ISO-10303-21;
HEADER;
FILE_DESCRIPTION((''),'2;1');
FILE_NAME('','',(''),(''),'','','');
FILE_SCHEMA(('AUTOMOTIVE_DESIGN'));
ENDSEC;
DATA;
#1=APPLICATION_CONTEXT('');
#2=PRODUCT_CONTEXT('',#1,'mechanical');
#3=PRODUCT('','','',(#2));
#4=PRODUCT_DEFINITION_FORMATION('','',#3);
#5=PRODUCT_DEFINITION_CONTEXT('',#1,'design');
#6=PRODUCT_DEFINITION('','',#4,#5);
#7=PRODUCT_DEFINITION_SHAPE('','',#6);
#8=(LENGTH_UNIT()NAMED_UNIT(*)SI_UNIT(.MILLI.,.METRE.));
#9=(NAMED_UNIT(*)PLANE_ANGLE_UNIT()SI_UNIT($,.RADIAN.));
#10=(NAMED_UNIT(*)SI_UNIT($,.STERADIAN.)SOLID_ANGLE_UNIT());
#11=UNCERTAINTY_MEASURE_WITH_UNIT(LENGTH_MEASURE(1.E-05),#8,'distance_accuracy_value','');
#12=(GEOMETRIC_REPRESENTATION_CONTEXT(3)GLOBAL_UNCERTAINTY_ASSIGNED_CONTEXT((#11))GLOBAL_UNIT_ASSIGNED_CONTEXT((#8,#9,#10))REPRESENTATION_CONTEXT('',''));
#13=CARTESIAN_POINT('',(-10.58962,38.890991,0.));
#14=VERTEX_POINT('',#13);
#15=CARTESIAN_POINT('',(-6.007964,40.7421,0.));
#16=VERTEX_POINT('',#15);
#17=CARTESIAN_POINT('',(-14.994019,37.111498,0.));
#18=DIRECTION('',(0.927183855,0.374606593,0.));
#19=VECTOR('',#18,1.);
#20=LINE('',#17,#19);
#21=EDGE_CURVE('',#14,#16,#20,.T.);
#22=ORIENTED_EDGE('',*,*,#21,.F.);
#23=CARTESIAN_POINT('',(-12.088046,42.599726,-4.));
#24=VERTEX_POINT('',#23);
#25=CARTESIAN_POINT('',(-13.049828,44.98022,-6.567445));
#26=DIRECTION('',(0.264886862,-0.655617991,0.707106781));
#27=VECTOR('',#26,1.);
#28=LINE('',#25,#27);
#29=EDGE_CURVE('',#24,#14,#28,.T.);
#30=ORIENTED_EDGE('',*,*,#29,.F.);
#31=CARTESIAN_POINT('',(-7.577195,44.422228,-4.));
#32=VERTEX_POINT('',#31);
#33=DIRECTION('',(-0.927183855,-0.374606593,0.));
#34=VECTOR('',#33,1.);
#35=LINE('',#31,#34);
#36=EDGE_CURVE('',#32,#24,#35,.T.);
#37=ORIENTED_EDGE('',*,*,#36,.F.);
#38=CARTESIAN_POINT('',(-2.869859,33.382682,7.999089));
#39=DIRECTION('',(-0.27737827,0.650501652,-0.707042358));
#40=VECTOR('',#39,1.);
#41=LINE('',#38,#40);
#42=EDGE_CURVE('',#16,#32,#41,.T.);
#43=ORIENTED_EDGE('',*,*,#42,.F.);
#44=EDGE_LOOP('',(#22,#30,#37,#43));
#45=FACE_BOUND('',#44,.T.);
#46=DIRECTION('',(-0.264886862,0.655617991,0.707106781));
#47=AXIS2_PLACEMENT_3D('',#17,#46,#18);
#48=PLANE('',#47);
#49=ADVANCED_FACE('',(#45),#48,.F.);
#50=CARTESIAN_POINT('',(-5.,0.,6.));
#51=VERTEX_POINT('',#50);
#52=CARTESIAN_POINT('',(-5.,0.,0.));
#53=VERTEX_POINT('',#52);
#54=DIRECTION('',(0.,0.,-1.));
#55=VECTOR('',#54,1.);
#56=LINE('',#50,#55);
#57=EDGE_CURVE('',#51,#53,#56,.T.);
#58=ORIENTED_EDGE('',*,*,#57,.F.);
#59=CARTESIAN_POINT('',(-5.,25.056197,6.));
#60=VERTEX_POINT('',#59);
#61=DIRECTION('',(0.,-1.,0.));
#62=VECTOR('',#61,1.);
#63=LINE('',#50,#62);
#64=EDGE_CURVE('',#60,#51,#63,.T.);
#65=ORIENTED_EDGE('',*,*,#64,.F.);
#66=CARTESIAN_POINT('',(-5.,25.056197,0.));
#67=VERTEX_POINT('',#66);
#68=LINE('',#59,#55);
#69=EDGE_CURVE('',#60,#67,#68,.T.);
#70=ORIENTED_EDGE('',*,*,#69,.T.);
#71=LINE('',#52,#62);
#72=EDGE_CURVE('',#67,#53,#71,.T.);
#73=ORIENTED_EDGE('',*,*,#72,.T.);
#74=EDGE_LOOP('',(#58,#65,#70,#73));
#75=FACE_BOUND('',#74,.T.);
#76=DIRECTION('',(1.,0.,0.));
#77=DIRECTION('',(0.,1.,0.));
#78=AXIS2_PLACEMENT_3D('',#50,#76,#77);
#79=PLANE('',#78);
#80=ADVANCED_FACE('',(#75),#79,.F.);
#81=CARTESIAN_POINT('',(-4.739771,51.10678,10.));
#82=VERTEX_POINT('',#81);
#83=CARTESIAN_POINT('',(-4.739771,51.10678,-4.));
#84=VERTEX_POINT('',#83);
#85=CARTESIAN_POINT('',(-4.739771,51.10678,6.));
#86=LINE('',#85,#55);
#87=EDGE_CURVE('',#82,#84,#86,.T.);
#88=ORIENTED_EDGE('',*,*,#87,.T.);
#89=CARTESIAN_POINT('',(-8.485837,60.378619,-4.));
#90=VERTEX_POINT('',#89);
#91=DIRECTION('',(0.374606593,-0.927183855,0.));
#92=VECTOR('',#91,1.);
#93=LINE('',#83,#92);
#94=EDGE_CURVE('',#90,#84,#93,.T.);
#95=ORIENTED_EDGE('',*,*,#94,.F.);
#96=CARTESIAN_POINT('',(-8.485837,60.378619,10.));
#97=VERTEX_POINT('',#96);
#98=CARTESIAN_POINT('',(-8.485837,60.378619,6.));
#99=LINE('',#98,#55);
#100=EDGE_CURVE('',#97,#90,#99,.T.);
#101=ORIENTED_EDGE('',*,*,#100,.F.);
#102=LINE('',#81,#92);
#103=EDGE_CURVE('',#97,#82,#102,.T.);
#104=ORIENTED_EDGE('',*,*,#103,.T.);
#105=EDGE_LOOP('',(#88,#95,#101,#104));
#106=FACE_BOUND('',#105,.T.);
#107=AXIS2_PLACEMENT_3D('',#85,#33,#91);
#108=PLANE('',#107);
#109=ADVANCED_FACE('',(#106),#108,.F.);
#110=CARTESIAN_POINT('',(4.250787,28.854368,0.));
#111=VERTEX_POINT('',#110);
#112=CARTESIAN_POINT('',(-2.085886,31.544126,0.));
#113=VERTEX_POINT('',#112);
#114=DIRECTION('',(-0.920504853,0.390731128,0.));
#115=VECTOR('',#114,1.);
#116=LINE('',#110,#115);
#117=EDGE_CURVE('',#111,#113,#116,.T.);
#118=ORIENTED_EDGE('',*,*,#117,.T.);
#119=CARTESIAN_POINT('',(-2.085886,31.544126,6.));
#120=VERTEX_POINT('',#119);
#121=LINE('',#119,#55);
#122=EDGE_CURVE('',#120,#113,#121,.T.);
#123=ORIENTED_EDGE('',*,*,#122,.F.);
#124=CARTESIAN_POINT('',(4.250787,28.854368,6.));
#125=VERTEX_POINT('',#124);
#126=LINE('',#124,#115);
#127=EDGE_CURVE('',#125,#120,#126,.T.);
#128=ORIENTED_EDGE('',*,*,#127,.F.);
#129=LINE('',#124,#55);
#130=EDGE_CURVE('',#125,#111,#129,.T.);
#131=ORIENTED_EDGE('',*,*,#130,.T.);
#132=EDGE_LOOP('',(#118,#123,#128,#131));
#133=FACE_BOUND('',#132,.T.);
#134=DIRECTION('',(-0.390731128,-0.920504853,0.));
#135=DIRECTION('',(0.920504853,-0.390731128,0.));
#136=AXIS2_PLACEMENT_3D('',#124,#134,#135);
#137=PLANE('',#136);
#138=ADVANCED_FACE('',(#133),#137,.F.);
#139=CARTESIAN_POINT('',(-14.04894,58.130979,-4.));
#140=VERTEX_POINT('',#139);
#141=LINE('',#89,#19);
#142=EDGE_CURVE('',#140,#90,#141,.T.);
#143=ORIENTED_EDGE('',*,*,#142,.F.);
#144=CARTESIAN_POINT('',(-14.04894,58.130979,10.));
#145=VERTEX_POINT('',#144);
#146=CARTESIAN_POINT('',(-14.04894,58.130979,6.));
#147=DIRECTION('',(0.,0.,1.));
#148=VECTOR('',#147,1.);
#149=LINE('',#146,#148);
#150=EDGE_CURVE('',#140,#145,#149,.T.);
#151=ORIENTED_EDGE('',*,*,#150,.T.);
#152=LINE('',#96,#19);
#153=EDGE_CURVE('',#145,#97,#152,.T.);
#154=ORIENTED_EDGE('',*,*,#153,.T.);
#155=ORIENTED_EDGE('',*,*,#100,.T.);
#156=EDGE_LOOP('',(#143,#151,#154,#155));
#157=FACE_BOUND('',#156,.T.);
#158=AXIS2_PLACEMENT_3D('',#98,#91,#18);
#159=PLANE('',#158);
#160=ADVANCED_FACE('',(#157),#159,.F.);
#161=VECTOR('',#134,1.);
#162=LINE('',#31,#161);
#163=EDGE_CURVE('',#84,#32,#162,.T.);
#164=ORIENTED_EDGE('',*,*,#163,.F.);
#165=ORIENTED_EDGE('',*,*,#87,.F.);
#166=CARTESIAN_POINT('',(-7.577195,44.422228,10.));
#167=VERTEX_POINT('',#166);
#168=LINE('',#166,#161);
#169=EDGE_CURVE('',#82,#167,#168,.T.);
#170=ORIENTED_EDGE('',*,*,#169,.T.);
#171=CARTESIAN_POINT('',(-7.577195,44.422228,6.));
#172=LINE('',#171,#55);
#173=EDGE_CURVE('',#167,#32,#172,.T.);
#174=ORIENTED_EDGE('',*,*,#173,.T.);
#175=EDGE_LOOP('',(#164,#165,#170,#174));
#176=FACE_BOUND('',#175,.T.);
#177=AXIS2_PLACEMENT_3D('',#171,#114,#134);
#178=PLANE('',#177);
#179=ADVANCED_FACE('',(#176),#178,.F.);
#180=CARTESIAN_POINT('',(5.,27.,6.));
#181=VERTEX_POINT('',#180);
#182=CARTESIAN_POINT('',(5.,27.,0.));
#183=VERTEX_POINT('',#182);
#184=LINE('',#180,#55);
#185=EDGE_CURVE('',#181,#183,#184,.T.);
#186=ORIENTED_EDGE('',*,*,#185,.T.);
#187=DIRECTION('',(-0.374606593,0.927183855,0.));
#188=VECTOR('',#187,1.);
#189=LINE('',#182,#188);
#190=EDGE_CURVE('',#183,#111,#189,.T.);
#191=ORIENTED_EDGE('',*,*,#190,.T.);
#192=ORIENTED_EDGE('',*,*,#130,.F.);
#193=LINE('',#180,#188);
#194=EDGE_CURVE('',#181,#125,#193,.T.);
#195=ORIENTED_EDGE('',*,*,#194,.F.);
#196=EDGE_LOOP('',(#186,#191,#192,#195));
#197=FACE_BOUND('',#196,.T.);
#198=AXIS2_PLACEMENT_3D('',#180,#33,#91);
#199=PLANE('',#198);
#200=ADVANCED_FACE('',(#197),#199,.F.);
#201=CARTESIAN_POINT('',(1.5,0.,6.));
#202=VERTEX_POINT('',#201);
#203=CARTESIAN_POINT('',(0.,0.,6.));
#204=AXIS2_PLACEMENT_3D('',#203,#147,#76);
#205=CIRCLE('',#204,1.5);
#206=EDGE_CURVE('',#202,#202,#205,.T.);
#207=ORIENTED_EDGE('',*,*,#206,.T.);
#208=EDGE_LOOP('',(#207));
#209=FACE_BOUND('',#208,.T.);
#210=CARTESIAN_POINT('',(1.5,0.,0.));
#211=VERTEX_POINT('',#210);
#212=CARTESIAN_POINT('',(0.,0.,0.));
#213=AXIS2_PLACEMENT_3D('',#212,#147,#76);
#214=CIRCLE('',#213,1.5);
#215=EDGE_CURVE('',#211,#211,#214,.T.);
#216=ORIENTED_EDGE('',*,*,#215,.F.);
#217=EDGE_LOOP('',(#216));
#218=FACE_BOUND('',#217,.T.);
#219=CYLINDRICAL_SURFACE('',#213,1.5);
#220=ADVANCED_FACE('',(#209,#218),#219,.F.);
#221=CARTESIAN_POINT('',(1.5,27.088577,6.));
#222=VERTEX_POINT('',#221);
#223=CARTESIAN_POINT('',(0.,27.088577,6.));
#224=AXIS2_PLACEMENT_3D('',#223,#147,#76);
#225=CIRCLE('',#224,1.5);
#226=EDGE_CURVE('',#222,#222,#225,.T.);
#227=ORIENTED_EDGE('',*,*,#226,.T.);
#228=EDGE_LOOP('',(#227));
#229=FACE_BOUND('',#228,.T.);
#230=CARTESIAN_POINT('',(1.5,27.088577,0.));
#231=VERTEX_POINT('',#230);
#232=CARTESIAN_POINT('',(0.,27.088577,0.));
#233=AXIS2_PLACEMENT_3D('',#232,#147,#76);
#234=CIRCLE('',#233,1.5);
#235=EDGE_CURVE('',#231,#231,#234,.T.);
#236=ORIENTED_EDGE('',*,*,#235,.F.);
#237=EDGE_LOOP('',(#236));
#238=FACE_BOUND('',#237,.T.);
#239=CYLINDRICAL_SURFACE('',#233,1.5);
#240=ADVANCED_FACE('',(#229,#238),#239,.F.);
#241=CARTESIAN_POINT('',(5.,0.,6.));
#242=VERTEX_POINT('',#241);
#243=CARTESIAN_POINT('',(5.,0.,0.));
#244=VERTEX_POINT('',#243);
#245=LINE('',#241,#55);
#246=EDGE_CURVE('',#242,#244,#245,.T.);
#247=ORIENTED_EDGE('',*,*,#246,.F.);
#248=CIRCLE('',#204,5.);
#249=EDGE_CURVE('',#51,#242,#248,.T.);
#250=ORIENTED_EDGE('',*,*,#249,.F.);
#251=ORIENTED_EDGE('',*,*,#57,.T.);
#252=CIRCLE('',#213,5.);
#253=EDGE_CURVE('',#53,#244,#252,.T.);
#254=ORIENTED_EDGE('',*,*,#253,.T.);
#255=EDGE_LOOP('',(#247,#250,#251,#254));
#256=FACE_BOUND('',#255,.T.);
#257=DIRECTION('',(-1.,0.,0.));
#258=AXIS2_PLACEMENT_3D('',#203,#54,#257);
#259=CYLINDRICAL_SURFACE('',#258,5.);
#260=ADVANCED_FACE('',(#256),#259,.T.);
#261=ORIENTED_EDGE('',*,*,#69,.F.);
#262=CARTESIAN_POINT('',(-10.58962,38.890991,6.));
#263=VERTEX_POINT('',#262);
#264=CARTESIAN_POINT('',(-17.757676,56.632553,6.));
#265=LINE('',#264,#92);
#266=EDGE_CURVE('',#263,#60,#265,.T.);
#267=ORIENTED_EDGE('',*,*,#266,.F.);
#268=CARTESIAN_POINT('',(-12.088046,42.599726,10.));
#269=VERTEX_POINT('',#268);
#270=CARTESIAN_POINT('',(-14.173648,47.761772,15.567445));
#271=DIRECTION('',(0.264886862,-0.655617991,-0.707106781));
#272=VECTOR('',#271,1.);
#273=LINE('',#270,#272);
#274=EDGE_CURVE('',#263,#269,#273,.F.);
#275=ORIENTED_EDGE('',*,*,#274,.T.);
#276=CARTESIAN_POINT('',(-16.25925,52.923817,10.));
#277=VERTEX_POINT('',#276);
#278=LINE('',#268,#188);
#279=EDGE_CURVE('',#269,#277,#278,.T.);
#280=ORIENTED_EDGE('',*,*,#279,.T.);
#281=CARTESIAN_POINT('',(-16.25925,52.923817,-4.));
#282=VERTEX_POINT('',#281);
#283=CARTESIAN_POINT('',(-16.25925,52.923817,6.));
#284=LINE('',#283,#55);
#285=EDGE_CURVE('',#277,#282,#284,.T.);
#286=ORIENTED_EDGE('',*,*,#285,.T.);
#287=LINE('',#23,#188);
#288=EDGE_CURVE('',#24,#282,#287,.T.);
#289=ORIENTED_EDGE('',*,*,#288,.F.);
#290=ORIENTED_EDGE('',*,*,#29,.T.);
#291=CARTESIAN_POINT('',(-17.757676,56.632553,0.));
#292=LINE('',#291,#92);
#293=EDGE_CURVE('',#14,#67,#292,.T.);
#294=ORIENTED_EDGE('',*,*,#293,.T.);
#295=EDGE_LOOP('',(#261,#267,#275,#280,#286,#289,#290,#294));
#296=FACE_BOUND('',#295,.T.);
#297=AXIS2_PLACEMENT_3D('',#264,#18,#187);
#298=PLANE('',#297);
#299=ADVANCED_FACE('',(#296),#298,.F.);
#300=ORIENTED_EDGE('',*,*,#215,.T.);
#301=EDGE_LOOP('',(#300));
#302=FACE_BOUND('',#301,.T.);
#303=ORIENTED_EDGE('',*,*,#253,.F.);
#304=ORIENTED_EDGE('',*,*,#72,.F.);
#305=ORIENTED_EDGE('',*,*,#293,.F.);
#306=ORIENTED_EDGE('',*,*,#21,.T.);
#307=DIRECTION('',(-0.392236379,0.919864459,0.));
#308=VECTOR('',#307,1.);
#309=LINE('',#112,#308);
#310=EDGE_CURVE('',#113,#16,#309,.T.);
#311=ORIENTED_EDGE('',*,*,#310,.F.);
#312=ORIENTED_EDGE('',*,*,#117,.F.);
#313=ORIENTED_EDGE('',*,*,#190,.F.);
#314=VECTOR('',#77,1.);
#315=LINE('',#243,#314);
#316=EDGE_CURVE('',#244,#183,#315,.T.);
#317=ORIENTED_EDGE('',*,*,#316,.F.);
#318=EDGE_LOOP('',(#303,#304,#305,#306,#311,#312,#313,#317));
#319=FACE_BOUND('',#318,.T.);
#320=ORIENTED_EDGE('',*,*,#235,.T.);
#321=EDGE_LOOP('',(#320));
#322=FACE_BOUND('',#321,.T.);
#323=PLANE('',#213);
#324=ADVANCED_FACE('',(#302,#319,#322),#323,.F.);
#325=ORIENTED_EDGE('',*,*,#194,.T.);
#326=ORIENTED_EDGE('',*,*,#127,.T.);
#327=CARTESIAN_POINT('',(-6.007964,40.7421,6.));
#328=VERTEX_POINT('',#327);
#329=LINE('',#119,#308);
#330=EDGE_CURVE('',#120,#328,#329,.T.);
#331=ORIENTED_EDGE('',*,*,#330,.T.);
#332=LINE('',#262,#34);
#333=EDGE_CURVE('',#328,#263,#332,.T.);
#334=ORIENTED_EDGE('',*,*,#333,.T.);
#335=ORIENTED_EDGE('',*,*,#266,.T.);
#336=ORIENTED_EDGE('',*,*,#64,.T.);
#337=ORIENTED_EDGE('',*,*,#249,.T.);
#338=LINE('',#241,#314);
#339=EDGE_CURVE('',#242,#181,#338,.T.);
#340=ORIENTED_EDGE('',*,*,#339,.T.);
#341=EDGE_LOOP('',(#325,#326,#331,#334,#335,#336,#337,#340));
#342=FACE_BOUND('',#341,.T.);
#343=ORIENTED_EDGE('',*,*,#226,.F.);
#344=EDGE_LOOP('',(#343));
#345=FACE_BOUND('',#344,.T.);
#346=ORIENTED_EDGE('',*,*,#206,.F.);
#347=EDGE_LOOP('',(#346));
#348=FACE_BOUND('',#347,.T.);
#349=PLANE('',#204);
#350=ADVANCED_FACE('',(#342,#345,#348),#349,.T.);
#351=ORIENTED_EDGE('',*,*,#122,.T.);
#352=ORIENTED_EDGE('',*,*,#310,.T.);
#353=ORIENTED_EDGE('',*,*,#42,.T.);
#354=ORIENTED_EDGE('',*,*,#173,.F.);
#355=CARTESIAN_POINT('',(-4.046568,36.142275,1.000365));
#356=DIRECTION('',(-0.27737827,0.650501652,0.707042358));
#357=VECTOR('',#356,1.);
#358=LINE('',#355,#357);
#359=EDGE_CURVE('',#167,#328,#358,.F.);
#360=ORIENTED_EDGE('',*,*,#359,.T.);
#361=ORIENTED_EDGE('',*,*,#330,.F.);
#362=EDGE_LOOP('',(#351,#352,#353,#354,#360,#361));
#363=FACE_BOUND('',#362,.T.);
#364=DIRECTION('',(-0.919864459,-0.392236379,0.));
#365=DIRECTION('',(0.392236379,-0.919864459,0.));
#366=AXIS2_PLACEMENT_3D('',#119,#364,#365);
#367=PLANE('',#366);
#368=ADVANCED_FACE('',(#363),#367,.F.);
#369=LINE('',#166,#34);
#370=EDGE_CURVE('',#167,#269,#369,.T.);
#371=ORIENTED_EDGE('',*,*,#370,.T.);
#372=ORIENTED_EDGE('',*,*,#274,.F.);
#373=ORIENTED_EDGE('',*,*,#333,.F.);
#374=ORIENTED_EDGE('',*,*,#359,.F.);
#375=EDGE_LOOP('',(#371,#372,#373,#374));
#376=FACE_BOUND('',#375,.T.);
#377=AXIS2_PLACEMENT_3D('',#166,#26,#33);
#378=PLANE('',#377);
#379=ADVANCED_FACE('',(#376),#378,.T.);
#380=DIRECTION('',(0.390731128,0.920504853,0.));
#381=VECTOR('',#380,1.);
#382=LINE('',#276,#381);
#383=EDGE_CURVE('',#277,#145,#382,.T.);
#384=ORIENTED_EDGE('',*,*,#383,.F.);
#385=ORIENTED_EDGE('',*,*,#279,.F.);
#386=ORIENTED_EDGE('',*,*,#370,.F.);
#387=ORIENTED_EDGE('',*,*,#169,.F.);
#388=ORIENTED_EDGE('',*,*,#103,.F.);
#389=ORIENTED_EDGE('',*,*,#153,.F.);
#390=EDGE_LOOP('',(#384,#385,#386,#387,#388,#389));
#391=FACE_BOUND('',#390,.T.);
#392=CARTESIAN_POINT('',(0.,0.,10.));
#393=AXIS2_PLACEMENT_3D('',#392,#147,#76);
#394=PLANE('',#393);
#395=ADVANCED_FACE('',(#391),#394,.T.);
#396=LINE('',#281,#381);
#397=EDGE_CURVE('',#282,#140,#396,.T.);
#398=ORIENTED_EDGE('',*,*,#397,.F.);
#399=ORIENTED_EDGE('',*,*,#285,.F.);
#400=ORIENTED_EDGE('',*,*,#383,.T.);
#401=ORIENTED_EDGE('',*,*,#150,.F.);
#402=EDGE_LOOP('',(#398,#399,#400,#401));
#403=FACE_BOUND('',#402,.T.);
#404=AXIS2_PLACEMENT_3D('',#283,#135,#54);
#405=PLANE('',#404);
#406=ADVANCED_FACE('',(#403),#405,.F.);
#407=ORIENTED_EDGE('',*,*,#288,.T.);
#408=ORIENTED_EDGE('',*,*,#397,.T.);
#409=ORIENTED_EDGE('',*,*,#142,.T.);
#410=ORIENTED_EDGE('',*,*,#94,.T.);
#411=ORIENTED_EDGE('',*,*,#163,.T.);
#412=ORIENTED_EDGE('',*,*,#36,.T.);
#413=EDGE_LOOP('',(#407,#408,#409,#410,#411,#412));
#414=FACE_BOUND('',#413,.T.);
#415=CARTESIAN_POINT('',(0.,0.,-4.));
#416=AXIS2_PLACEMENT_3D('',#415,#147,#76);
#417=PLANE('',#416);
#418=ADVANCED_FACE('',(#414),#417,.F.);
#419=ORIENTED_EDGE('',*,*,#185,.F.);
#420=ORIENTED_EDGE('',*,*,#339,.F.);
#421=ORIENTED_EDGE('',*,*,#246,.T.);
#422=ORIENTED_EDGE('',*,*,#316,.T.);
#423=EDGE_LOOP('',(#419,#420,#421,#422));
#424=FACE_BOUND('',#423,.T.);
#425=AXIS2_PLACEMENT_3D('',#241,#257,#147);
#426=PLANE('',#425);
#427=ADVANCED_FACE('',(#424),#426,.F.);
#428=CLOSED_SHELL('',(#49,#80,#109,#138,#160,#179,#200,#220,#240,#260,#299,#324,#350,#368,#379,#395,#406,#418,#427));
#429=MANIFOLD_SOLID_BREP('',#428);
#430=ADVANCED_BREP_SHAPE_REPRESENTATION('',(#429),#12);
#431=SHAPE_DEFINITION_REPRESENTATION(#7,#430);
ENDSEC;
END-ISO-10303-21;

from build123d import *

# Parameters (mm, degrees)
EXTRUDE_1_DEPTH      = 6
CHAMFER_1_SIZE       = 4
SKETCH_2_R           = 1.5
CUT_EXTRUDE_1_DEPTH  = 63.816723883
EXTRUDE_2_DEPTH      = 4
EXTRUDE_2_DEPTH_BACK = 10
CHAMFER_2_SIZE       = 4


with BuildPart() as part:
    # 草图1 → 凸台-拉伸1 (new body)
    with BuildSketch(Plane.XY):
        with BuildLine():
            Line((-5, 0), (-5, 25.056196909))
            Line((-5, 25.056196909), (-17.757675909, 56.63255283))
            Line((-17.757675909, 56.63255283), (-8.485837363, 60.378618764))
            Line((-8.485837363, 60.378618764), (-4.739771429, 51.106780219))
            Line((-4.739771429, 51.106780219), (-7.577195414, 44.422228211))
            Line((-7.577195414, 44.422228211), (-2.08588611, 31.544125784))
            Line((-2.08588611, 31.544125784), (4.250786813, 28.854367709))
            Line((4.250786813, 28.854367709), (5, 27))
            Line((5, 27), (5, 0))
            ThreePointArc((5, 0), (0, -5), (-5, 0))
        make_face()
    extrude(amount=EXTRUDE_1_DEPTH)

    # 倒角1
    chamfer_1_edges = [part.edges().sort_by_distance(p)[0] for p in [
        (-17.757675909, 56.63255283, 3),
    ]]
    chamfer(chamfer_1_edges, length=CHAMFER_1_SIZE)

    # 草图2 → 切除-拉伸1 (cut, through all)
    with BuildSketch(Plane.XY.offset(6)):
        with Locations((0, 27.08857665)):
            Circle(SKETCH_2_R)
        Circle(SKETCH_2_R)
    extrude(amount=-CUT_EXTRUDE_1_DEPTH, mode=Mode.SUBTRACT)

    # 草图3 → 凸台-拉伸2 (add, two sides: drawn at the far end of the back side and taken through both)
    with BuildSketch(Plane(origin=(0, 0, 0), x_dir=(-1, 0, 0), z_dir=(0, 0, -1)).offset(-EXTRUDE_2_DEPTH_BACK)):
        Polygon((16.259249535, 52.923817412), (14.04894049, 58.130979204), (8.485837363, 60.378618764), (4.739771429, 51.106780219), (7.577195414, 44.422228211), (12.088045963, 42.599726288), align=None)
    extrude(amount=EXTRUDE_2_DEPTH + EXTRUDE_2_DEPTH_BACK)

    # 倒角2
    chamfer_2_edges = [part.edges().sort_by_distance(p)[0] for p in [
        (-9.832620688, 43.51097725, 6),
        (-9.832620688, 43.51097725, 0),
    ]]
    chamfer(chamfer_2_edges, length=CHAMFER_2_SIZE - 0.0001)  # a hair under: the kernel refuses the full size


solid = part.part
